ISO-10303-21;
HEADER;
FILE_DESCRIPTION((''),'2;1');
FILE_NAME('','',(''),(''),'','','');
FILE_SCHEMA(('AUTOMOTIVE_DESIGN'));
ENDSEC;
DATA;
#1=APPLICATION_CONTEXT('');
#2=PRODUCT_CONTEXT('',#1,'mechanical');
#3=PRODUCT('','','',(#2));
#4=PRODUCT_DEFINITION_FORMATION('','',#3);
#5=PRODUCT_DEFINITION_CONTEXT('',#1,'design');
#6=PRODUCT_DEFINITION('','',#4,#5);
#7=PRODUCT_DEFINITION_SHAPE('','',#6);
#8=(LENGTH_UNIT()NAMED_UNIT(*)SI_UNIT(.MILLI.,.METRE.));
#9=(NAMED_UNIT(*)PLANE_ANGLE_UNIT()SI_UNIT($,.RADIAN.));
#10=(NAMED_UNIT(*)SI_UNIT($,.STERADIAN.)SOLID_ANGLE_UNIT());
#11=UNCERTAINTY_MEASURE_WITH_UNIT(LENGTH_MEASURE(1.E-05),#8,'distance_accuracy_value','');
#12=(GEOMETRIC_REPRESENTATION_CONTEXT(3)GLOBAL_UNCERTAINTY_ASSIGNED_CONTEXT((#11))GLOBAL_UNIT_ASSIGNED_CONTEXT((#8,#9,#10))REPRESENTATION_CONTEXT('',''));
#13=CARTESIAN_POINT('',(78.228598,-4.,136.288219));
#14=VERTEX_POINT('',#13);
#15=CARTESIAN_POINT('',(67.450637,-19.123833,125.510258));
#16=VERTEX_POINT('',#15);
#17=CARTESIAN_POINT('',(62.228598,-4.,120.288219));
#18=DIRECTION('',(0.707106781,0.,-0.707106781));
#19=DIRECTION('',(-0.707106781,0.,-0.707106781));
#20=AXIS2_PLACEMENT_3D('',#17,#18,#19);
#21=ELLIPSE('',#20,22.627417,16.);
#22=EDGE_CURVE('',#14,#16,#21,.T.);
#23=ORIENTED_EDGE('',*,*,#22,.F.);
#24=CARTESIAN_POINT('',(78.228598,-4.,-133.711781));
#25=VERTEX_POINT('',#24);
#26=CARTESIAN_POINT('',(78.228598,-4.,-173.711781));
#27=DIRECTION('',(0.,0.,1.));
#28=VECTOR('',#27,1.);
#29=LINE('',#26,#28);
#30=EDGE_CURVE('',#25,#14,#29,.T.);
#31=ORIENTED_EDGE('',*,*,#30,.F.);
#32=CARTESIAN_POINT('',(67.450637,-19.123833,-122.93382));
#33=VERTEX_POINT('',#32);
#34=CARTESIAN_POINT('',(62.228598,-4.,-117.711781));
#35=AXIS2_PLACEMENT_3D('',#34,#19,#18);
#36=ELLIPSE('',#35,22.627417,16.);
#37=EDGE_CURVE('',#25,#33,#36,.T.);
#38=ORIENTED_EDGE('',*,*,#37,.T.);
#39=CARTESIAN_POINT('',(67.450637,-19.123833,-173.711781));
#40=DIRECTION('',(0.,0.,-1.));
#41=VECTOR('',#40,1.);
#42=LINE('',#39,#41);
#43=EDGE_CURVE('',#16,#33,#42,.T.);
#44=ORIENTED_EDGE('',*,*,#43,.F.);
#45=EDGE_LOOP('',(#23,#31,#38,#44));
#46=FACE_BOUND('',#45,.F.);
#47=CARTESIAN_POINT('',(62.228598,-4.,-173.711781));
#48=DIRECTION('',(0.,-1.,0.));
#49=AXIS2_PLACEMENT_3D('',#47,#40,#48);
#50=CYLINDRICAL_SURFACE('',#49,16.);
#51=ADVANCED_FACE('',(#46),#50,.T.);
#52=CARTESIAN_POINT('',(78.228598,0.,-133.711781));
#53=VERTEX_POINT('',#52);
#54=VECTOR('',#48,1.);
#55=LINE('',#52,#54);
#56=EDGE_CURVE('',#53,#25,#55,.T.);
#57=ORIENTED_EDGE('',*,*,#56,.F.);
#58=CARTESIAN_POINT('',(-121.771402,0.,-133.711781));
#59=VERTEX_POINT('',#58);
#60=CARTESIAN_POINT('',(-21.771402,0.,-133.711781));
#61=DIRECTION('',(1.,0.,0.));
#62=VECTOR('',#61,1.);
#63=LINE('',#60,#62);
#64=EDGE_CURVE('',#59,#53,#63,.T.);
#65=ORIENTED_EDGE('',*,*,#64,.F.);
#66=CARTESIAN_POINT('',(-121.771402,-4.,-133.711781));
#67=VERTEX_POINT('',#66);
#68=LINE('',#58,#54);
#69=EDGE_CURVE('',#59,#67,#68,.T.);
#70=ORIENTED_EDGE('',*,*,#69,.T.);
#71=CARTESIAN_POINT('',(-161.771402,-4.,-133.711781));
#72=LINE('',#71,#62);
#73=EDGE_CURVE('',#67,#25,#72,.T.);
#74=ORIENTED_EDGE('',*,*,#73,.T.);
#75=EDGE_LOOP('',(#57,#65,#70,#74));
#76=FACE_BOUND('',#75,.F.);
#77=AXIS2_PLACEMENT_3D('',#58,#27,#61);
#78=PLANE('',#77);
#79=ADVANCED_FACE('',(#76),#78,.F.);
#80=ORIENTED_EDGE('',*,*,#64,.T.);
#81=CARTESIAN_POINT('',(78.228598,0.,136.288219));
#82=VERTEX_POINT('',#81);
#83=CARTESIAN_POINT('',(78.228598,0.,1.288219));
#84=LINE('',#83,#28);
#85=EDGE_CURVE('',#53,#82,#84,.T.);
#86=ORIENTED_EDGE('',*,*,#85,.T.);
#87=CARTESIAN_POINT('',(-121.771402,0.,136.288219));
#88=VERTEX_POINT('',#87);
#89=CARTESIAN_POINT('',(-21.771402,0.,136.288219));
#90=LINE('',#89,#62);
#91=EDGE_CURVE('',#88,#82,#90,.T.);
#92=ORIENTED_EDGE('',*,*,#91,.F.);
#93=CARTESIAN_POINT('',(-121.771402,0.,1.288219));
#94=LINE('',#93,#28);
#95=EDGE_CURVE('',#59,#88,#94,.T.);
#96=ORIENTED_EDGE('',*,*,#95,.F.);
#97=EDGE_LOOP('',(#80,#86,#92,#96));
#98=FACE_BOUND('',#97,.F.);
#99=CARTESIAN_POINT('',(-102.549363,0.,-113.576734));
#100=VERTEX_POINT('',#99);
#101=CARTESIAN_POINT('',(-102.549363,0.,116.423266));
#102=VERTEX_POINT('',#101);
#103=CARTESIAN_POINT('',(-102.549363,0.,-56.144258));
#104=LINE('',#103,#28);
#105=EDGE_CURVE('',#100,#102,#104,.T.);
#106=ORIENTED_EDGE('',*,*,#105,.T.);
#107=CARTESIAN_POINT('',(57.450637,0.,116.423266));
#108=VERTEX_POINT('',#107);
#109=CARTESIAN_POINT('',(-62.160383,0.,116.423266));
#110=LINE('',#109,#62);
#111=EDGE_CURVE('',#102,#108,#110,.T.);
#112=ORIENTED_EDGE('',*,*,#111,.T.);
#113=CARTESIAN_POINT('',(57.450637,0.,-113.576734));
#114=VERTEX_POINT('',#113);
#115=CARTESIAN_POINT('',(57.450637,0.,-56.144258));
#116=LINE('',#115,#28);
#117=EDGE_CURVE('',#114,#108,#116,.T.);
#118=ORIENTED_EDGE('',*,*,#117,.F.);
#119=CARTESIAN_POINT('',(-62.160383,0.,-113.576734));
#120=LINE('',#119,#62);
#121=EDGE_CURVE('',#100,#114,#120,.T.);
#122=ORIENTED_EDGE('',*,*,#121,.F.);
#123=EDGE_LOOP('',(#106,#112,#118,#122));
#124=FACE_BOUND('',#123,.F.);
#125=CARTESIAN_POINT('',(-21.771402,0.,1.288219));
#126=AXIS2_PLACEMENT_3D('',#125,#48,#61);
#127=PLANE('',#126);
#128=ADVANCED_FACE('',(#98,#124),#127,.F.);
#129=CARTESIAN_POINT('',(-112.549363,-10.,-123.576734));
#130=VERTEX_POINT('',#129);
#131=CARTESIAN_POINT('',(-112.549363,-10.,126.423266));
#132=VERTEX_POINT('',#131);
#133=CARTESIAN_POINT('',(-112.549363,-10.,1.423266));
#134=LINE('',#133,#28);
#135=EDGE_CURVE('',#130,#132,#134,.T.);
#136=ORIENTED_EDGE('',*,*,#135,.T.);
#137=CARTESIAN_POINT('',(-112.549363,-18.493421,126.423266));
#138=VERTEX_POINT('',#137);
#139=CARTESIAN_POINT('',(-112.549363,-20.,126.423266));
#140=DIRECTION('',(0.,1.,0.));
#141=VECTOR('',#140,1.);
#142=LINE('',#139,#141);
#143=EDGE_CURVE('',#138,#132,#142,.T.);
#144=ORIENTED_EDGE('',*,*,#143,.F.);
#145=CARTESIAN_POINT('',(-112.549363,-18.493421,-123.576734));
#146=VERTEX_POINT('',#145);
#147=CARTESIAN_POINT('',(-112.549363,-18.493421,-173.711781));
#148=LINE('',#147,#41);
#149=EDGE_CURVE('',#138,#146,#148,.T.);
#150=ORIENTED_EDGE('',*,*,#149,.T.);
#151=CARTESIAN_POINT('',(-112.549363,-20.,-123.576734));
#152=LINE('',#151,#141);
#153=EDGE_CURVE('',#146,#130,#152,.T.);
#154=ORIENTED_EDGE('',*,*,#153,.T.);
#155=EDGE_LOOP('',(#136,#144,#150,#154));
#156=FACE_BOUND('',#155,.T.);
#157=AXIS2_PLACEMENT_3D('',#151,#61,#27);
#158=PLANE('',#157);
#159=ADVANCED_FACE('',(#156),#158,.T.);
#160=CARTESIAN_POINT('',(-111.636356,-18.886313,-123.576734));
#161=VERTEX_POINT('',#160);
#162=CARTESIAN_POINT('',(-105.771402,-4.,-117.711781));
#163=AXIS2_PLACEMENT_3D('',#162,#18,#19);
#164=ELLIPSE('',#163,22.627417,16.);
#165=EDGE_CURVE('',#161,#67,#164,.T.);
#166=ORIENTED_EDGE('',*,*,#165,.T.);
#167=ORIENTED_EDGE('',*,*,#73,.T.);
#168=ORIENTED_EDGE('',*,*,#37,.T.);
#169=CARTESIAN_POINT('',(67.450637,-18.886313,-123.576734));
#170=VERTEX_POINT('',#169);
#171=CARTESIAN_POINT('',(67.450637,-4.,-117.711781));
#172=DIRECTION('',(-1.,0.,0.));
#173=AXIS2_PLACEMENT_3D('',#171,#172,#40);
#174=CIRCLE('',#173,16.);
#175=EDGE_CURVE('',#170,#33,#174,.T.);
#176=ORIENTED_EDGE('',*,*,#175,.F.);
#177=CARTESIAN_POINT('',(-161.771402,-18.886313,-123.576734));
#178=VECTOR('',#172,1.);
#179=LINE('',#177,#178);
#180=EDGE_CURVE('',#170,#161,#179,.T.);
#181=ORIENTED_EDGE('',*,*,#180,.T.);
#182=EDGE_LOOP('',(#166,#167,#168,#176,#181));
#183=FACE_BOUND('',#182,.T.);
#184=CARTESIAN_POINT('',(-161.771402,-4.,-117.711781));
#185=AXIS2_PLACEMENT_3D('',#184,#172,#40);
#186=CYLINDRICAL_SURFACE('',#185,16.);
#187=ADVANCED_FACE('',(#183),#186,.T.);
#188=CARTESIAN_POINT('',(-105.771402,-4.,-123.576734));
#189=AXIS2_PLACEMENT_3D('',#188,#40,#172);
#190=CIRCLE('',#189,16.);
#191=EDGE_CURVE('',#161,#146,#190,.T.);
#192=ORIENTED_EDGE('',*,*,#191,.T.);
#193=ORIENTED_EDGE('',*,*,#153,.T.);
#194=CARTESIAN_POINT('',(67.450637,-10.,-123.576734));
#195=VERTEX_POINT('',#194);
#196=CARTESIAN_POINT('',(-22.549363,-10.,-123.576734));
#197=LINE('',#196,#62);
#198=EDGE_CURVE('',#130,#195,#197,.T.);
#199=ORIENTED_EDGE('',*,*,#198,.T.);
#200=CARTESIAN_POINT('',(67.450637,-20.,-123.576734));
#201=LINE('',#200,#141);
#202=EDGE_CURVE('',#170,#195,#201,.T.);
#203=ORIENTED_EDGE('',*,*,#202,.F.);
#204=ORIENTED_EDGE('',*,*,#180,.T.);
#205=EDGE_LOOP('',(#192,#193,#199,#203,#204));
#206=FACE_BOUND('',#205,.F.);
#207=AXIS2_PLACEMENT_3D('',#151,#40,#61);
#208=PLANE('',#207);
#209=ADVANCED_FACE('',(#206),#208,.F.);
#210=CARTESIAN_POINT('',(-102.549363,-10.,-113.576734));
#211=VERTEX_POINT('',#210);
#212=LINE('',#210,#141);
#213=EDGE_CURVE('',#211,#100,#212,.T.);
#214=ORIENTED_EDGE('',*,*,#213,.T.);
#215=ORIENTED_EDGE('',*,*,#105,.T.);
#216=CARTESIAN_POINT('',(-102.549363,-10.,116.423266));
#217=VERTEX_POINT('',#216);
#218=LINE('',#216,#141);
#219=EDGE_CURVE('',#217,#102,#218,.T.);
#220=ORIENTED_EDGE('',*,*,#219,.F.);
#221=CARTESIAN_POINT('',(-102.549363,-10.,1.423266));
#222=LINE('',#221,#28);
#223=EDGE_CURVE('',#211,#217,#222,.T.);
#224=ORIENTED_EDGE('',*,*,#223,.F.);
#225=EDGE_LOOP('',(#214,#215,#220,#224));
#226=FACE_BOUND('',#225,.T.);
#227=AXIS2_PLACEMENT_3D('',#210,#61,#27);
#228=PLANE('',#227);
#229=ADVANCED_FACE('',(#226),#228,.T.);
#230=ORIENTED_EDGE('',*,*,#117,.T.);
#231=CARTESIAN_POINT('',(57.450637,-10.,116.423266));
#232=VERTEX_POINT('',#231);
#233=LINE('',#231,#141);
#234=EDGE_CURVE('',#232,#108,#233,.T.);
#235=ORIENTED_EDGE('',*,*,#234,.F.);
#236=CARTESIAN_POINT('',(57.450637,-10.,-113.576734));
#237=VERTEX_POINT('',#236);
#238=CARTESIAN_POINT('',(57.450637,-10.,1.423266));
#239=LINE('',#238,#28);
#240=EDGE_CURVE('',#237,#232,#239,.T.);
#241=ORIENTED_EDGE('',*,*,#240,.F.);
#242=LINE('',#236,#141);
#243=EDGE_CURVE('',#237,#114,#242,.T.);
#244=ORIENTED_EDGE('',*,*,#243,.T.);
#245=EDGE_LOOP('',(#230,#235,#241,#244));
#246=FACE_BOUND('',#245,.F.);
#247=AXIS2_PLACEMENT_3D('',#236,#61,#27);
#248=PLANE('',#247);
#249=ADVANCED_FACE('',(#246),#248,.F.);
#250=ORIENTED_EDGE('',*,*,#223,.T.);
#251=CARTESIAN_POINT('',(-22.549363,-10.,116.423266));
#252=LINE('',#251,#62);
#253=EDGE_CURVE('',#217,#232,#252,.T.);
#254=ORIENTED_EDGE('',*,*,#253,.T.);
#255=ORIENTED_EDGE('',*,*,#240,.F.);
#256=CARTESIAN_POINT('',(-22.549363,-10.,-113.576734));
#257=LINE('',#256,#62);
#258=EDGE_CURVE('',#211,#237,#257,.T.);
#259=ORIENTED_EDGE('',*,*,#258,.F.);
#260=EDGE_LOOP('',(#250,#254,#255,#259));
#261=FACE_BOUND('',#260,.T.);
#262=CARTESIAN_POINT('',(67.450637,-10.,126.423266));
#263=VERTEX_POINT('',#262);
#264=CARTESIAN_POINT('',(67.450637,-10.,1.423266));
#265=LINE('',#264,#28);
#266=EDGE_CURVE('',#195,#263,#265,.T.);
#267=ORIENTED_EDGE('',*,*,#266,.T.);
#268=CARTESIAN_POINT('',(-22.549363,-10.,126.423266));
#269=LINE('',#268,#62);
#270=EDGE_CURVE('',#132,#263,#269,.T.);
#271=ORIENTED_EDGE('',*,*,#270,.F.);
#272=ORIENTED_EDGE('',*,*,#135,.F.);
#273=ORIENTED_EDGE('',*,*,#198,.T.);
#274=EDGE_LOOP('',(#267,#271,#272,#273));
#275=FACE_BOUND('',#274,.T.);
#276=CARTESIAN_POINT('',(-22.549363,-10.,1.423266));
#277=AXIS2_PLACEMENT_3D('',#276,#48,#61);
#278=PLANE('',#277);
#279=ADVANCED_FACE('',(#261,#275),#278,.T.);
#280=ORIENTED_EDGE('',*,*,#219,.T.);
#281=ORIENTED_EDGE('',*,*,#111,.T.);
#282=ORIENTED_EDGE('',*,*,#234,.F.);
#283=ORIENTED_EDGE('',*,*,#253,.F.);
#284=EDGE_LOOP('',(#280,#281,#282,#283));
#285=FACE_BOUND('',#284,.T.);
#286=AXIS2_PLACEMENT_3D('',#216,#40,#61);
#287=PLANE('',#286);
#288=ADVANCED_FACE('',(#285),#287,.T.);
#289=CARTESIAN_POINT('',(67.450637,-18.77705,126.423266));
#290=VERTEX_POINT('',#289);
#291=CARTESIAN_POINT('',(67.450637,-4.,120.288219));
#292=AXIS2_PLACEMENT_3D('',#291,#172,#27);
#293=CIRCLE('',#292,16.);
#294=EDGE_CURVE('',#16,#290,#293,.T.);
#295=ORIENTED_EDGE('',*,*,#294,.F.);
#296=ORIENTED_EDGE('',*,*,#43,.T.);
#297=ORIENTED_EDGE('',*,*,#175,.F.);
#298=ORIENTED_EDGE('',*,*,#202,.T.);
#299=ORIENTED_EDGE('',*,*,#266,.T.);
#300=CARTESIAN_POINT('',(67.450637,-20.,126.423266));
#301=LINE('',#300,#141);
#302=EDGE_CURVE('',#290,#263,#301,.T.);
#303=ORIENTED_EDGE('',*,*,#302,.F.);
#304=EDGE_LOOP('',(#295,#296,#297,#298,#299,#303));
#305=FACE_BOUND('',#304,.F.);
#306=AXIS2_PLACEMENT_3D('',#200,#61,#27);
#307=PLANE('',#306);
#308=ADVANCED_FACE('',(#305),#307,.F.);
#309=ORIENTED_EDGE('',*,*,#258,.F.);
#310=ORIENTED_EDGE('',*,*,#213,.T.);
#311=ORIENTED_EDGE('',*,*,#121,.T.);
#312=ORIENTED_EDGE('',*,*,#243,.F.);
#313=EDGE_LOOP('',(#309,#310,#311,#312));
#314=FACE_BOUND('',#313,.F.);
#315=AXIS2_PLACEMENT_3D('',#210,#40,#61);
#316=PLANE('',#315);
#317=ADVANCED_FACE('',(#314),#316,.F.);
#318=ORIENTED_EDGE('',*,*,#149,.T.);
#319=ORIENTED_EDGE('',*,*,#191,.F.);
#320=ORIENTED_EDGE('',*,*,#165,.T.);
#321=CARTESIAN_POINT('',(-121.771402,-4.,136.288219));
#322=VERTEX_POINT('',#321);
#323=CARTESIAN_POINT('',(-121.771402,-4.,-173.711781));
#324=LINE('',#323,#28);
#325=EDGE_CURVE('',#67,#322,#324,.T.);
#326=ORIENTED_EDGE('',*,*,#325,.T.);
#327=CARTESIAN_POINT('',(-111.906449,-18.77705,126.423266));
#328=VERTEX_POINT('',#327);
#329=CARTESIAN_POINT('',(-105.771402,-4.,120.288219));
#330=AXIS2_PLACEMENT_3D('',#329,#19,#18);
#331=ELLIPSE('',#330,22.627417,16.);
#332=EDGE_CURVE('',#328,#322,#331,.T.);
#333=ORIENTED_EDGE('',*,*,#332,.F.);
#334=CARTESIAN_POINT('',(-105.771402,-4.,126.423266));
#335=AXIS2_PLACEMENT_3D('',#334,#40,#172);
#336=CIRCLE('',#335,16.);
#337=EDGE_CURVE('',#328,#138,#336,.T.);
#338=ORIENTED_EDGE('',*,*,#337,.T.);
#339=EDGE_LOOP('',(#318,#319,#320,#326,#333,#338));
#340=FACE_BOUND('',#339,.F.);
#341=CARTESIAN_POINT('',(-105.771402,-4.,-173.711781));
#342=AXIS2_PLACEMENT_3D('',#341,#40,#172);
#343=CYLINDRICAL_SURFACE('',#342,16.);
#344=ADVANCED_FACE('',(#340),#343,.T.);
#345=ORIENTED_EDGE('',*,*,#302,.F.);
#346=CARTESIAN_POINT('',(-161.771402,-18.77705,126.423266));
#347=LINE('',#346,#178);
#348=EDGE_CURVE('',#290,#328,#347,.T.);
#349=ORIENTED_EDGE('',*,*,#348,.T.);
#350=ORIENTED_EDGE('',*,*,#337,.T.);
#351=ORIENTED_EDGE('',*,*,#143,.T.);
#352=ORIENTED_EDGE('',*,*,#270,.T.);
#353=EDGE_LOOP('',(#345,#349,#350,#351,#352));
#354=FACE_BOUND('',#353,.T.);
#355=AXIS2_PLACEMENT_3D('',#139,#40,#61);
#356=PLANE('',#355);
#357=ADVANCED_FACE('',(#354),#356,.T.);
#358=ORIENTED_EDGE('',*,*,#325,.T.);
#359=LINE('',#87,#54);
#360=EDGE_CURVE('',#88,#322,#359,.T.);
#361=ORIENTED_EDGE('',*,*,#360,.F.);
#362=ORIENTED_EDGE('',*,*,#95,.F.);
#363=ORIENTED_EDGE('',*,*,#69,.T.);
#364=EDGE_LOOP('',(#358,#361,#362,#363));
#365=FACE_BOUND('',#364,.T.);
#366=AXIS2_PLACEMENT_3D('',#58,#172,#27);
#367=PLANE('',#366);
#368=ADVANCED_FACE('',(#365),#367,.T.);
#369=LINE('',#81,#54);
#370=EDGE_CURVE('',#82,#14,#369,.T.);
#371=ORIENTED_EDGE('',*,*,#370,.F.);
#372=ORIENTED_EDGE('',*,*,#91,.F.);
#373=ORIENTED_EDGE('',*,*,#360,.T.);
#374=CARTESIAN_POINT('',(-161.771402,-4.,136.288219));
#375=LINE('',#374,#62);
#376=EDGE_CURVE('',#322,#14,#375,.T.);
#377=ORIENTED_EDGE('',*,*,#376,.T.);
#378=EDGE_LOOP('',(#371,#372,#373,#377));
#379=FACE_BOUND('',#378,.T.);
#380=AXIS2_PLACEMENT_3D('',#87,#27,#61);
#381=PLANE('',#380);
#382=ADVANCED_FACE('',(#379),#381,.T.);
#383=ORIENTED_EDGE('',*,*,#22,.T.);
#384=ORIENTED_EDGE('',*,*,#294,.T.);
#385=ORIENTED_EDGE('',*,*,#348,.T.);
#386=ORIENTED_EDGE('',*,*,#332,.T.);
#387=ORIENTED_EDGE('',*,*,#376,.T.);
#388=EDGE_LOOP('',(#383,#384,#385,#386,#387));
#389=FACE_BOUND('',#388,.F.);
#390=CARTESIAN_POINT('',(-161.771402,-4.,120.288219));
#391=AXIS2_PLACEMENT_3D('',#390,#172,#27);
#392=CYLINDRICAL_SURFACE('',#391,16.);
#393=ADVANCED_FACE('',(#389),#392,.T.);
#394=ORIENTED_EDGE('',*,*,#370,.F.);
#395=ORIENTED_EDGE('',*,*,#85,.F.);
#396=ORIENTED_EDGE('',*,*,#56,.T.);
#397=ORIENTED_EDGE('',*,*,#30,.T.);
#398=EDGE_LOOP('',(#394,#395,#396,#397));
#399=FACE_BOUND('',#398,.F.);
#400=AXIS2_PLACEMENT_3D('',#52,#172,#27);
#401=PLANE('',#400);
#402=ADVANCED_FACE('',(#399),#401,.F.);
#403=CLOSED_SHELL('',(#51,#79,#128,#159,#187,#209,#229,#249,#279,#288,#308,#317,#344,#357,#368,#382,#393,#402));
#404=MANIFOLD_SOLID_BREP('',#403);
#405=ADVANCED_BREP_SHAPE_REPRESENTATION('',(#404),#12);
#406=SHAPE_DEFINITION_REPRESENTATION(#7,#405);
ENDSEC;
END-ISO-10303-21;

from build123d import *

# Parameters (mm, degrees)
F0_W        = 200
F0_H        = 270
F1_DEPTH    = 20
F2_W        = 180
F2_H        = 250
F3_DEPTH    = 10
F4_W        = 160
F4_H        = 230
F5_DEPTH    = 25
F6_T1_DEPTH = 350
F6_T3_DEPTH = 280


# Not quite as in the source:
# - a fillet or chamfer that OpenCascade refuses, or shapes differently, is made with other operations: its cross-section is extruded or revolved along the edge and cut away or added


with BuildPart() as f1:
    # F0 (on Front) → F1 (new body)
    with BuildSketch(Plane.XZ):
        with Locations((-21.7714021464, 1.2882190198)):
            Rectangle(F0_W, F0_H)
    extrude(amount=F1_DEPTH)

    # F2 (on face) → F3 (cut)
    with BuildSketch(Plane.XZ.offset(20)):
        with Locations((-22.5493634492, 1.4232655292)):
            Rectangle(F2_W, F2_H)
    extrude(amount=-F3_DEPTH, mode=Mode.SUBTRACT)

    # F4 (on face) → F5 (cut)
    with BuildSketch(Plane.XZ.offset(10)):
        with Locations((-22.5493634492, 1.4232655292)):
            Rectangle(F4_W, F4_H)
    extrude(amount=-F5_DEPTH, mode=Mode.SUBTRACT)

    # F6: fillet of radius 16 on 4 edges, made by hand

    # F6_s2 → F6_t1 (cut)
    with BuildSketch(Plane.XY.offset(-173.7117809802)):
        with BuildLine():
            ThreePointArc((-121.7714021464, -4), (-117.0851106454, -15.313708499), (-105.7714021464, -20))
            Line((-105.7714021464, -20), (-121.7714021464, -20))
            Line((-121.7714021464, -20), (-121.7714021464, -4))
        make_face()
        with BuildLine():
            ThreePointArc((62.2285978536, -20), (73.5423063526, -15.313708499), (78.2285978536, -4))
            Line((78.2285978536, -4), (78.2285978536, -20))
            Line((78.2285978536, -20), (62.2285978536, -20))
        make_face()
    extrude(amount=F6_T1_DEPTH, mode=Mode.SUBTRACT)

    # F6_s4 → F6_t3 (cut)
    with BuildSketch(Plane.YZ.offset(-161.7714021464)):
        with BuildLine():
            ThreePointArc((-4, 136.2882190198), (-15.313708499, 131.6019275188), (-20, 120.2882190198))
            Line((-20, 120.2882190198), (-20, 136.2882190198))
            Line((-20, 136.2882190198), (-4, 136.2882190198))
        make_face()
        with BuildLine():
            ThreePointArc((-4, -133.7117809802), (-15.313708499, -129.0254894792), (-20, -117.7117809802))
            Line((-20, -117.7117809802), (-20, -133.7117809802))
            Line((-20, -133.7117809802), (-4, -133.7117809802))
        make_face()
    extrude(amount=F6_T3_DEPTH, mode=Mode.SUBTRACT)


solid = f1.part
